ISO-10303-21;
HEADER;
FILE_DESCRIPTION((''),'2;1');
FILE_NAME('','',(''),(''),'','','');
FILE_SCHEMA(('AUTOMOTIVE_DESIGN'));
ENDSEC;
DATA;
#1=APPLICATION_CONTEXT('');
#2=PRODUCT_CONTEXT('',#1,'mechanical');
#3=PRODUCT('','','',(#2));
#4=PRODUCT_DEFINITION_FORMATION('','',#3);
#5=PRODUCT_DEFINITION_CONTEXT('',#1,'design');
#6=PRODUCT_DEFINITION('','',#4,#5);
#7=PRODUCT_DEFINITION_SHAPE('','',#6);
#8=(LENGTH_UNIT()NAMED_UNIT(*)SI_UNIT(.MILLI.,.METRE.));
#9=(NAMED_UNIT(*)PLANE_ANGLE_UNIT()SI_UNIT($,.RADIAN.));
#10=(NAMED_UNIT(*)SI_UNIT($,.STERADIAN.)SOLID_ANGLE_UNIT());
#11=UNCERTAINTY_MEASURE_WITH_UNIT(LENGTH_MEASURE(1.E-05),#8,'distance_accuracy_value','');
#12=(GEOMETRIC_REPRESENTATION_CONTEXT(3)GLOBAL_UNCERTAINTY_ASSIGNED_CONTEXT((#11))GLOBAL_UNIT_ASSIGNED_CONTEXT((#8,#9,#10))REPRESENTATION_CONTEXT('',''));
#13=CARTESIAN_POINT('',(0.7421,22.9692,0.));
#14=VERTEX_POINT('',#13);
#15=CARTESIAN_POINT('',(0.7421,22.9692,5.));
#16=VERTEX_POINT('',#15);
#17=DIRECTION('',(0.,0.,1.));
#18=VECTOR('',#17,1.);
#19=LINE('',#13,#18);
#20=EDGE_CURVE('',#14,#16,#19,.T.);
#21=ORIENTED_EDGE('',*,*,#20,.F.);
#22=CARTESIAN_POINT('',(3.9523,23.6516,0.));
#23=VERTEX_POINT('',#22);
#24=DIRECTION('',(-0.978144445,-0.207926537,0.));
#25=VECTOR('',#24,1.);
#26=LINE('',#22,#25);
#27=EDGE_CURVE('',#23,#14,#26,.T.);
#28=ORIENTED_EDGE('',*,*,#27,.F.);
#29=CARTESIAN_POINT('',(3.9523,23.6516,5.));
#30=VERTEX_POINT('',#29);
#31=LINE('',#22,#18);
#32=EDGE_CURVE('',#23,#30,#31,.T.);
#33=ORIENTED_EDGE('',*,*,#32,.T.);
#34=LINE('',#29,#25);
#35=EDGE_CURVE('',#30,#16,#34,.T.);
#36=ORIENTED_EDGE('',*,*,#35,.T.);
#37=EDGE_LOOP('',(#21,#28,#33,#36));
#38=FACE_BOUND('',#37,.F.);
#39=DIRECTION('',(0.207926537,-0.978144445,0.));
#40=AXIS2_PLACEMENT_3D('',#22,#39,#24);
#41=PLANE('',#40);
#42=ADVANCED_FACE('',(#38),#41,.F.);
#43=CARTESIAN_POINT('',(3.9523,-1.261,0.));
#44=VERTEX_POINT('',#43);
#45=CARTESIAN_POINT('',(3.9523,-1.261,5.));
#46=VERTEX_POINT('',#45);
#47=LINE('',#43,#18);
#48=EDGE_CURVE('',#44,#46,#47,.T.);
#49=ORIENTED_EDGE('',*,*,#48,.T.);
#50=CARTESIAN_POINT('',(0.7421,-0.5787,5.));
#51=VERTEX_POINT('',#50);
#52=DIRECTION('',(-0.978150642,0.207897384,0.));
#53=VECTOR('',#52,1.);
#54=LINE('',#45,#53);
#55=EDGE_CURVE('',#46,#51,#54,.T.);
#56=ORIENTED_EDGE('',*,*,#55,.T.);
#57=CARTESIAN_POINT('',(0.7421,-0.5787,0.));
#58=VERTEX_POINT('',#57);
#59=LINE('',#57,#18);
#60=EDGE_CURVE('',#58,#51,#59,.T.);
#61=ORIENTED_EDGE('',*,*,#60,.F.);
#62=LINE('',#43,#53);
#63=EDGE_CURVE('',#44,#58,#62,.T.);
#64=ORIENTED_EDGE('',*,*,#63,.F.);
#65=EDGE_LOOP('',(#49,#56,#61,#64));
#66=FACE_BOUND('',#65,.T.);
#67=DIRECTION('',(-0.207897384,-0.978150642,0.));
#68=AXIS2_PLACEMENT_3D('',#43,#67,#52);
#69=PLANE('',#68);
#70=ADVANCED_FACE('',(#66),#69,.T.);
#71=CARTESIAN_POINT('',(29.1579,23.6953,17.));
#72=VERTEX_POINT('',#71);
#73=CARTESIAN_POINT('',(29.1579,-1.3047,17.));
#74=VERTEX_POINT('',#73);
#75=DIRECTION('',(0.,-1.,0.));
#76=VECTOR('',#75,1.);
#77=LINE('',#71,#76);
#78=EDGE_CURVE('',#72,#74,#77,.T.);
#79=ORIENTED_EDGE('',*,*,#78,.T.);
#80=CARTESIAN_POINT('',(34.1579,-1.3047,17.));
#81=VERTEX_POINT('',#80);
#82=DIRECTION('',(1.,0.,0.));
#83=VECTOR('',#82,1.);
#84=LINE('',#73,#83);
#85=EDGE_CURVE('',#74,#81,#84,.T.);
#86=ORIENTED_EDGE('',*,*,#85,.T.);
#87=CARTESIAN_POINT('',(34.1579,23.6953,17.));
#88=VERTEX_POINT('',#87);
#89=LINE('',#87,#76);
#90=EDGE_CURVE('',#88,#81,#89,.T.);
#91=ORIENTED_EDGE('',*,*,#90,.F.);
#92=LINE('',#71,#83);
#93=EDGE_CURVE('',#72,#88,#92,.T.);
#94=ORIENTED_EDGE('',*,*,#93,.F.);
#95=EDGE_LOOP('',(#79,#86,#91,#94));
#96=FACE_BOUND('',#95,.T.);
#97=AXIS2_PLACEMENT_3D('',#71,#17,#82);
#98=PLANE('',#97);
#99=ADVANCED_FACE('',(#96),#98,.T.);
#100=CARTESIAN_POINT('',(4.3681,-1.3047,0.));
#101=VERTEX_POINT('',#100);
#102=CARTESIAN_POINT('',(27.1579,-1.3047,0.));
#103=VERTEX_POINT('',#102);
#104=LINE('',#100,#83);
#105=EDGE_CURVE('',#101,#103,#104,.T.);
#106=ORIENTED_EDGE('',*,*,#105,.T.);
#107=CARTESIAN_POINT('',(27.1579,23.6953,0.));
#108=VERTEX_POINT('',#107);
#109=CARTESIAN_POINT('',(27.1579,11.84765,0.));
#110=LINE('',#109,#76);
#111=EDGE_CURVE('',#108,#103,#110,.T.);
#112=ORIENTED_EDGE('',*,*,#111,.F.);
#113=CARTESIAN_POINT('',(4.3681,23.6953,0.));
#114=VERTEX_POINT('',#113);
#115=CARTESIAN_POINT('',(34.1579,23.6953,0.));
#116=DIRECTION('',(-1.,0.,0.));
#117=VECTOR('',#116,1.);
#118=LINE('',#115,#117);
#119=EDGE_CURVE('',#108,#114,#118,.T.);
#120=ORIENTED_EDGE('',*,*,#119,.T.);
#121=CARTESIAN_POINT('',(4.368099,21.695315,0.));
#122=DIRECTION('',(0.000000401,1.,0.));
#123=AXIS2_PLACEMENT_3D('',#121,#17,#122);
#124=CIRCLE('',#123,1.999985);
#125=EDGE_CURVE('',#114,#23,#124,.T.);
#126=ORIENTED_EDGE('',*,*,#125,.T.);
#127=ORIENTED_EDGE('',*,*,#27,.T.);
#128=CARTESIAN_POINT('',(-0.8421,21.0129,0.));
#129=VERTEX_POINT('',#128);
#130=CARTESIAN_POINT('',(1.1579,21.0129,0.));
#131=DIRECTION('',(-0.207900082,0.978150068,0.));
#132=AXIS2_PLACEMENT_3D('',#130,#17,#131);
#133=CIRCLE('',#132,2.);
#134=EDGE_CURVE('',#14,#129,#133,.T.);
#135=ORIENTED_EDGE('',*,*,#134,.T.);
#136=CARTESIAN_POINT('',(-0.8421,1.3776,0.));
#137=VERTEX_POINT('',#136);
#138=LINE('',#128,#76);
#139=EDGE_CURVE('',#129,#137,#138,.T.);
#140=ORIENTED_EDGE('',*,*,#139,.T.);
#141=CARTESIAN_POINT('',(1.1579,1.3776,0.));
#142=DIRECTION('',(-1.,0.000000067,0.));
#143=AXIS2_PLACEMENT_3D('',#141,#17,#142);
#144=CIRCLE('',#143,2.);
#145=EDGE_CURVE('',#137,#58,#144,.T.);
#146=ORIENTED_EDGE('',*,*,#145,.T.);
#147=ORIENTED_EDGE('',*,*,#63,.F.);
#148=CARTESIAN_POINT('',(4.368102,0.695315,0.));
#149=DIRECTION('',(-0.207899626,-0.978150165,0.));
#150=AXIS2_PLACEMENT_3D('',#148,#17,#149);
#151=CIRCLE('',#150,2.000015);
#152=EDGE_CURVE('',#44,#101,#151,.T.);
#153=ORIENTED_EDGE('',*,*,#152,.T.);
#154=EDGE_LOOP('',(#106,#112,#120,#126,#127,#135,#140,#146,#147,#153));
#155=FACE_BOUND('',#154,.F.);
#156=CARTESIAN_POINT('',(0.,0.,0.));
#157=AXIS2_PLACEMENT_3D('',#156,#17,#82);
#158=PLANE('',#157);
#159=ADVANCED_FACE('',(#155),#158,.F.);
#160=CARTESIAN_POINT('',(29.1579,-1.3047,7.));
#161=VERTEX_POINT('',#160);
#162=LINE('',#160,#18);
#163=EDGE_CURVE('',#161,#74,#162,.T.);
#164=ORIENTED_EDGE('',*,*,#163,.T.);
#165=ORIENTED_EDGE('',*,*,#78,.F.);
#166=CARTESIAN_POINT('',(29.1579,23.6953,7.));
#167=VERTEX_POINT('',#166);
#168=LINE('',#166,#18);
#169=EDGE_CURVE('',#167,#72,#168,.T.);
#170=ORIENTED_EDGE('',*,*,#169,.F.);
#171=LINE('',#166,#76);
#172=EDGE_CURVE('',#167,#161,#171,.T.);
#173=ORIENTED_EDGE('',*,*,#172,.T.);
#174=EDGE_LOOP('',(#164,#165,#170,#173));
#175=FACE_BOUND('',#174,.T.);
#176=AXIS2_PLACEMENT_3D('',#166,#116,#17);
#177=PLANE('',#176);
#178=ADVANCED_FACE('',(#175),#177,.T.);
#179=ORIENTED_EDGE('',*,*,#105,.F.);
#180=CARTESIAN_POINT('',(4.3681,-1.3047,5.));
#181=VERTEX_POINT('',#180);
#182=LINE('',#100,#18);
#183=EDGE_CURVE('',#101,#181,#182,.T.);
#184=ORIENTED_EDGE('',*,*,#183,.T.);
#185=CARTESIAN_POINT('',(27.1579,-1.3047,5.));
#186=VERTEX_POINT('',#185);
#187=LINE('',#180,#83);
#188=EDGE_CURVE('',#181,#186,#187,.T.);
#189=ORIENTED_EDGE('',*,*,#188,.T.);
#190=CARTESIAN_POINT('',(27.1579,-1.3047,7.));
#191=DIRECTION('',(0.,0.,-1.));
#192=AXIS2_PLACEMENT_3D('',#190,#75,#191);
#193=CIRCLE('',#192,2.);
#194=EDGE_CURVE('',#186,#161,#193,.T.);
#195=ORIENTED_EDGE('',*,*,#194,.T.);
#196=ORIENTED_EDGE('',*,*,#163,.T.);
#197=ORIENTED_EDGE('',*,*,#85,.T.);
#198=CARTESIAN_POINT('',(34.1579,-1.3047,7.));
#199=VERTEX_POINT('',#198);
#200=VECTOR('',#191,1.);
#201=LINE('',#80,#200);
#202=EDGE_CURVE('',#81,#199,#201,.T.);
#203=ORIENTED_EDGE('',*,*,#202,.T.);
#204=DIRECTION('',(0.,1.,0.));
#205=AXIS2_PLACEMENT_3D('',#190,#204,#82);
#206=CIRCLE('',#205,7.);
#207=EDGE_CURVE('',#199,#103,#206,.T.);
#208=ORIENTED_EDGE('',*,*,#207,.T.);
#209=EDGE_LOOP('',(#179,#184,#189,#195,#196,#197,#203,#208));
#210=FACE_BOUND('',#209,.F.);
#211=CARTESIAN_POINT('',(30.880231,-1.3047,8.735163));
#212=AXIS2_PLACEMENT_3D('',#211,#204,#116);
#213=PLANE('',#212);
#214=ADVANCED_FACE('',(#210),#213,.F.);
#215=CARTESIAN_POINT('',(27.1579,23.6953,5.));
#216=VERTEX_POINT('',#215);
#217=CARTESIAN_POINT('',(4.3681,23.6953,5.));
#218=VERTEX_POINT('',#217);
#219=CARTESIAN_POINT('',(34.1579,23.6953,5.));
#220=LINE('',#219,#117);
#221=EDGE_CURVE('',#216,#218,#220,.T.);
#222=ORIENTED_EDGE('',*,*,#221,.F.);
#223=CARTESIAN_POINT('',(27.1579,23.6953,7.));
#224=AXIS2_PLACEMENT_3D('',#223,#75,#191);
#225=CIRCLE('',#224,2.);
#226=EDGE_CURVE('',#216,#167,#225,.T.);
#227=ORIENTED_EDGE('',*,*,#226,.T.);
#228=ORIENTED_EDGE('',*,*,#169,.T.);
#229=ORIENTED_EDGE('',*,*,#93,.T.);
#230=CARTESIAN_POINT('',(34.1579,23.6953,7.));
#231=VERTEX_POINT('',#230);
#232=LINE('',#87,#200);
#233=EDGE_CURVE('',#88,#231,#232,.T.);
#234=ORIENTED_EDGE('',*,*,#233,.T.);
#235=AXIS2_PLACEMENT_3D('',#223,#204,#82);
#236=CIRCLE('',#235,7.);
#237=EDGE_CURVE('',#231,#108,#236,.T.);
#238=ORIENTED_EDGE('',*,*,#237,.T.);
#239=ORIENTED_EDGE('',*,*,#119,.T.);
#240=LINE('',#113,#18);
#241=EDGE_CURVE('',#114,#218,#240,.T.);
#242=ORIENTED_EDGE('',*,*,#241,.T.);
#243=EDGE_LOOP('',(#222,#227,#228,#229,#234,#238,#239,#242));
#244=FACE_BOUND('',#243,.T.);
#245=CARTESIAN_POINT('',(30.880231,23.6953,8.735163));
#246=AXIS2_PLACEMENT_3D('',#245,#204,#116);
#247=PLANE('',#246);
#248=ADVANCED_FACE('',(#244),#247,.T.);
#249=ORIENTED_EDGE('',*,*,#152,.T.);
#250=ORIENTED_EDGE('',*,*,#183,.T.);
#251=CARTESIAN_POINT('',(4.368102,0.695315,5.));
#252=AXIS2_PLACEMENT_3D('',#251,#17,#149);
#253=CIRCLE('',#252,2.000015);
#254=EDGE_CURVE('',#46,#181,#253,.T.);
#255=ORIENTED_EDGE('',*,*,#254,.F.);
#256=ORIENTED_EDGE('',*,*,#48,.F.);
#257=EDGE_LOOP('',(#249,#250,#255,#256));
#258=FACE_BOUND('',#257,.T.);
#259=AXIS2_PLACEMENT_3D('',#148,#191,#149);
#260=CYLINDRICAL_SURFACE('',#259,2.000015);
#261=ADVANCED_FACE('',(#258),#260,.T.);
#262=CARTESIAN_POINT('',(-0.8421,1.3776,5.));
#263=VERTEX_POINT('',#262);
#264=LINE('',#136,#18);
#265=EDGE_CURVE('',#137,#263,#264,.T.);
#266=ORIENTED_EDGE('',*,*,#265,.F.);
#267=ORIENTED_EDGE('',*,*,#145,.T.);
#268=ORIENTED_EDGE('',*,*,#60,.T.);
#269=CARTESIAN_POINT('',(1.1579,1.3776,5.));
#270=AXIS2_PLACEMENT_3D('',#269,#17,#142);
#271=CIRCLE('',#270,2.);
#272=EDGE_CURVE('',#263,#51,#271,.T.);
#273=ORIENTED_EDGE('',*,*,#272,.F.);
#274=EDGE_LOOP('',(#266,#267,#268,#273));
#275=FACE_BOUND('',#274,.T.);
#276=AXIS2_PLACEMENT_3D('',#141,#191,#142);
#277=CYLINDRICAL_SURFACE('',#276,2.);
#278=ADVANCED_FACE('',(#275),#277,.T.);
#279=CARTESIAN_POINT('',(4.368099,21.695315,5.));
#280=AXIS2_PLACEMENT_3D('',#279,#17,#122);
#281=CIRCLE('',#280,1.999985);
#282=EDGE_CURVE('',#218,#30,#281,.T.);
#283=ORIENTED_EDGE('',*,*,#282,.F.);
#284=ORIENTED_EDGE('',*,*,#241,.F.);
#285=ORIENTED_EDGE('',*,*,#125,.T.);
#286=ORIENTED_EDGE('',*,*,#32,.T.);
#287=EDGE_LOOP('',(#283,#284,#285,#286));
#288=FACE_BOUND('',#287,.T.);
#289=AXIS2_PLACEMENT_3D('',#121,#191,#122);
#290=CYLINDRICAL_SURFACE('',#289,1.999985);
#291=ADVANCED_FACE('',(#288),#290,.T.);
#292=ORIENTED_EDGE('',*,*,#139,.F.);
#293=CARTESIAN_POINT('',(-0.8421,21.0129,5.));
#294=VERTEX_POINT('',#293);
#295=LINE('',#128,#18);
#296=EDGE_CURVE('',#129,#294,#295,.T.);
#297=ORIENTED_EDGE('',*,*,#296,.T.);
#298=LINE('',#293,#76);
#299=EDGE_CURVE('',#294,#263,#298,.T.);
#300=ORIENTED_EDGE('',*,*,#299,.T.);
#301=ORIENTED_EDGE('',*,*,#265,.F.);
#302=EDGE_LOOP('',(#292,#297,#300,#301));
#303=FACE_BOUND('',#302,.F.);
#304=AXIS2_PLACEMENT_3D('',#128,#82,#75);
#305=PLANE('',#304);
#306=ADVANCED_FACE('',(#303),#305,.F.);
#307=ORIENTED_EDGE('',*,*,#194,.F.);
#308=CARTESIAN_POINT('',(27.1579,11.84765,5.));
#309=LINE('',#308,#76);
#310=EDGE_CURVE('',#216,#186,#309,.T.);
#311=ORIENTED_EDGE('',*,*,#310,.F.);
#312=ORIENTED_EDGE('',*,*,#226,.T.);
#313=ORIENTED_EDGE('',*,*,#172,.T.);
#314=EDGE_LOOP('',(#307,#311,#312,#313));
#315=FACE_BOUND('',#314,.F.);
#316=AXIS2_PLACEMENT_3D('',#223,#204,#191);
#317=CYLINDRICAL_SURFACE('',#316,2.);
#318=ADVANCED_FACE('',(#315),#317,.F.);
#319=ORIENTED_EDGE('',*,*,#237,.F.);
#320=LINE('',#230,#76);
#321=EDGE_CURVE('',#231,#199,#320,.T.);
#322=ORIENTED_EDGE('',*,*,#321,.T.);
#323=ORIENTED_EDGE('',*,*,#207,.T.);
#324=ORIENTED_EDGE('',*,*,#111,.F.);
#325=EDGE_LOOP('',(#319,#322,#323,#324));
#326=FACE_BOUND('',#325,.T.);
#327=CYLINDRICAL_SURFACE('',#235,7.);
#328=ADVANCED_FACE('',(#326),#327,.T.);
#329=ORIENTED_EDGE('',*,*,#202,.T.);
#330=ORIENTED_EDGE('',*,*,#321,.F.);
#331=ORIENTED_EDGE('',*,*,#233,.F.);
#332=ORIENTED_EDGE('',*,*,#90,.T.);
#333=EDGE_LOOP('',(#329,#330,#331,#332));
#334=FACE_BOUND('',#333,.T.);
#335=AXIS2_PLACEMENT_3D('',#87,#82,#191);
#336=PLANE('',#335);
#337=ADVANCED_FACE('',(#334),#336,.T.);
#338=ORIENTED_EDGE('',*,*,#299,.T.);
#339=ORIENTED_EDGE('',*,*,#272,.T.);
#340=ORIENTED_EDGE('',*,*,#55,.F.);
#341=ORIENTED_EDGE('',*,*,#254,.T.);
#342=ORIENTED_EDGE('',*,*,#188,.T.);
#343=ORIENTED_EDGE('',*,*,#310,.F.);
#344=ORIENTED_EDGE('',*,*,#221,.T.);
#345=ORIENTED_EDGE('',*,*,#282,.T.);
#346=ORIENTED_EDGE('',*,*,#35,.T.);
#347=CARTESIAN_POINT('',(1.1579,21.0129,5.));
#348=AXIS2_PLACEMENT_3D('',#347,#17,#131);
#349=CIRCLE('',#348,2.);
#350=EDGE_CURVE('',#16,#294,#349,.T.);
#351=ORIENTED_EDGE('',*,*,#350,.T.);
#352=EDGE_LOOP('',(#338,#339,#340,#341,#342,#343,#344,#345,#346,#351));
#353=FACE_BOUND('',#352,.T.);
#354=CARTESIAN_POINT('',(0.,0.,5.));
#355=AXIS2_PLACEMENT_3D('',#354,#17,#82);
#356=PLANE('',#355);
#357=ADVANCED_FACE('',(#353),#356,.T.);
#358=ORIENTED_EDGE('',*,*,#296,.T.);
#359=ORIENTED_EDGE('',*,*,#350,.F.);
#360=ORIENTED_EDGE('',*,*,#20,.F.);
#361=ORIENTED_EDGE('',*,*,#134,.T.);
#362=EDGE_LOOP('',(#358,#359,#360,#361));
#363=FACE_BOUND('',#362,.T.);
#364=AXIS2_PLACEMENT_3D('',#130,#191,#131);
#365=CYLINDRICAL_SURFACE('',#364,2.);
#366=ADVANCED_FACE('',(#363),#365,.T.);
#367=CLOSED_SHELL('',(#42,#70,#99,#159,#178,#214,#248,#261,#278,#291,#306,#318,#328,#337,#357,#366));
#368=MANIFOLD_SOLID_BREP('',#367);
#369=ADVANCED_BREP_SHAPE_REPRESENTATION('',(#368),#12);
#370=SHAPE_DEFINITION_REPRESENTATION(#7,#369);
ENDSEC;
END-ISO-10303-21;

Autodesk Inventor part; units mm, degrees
ref_plane "YZ Plane" through (0, 0, 0) normal (1, 0, 0) x (0, 1, 0)
ref_plane "XZ Plane" through (0, 0, 0) normal (0, 1, 0) x (-1, 0, 0)
ref_plane "XY Plane" through (0, 0, 0) normal (0, 0, 1) x (1, 0, 0)
sketch "Sketch1" plane through (0, 0, 0) normal (0, 0, 1) x (1, 0, 0)
  line L0 (4.3681, -1.3047) -> (34.1579, -1.3047)
  line L1 (34.1579, -1.3047) -> (34.1579, 23.6953)
  line L2 (34.1579, 23.6953) -> (4.3681, 23.6953)
  line L3 (-0.8421, 21.0129) -> (-0.8421, 1.3776)
  line L4 (3.9523, 23.6516) -> (0.7421, 22.9692)
  line L5 (3.9523, -1.261) -> (0.7421, -0.5787)
  line L6 (4.1579, 23.6953) -> (4.1579, -1.3047) construction
  arc A0 (0.7421, 22.9692) -> (-0.8421, 21.0129) centre (1.1579, 21.0129) ccw
  arc A1 (-0.8421, 1.3776) -> (0.7421, -0.5787) centre (1.1579, 1.3776) ccw
  arc A2 (4.3681, 23.6953) -> (3.9523, 23.6516) centre (4.3681, 21.6953) ccw
  arc A3 (3.9523, -1.261) -> (4.3681, -1.3047) centre (4.3681, 0.6953) ccw
  point P0 (0, 0)
  point P1 (-0.8421, 22.6325)
  point P2 (-0.8421, -0.242)
  dimension "d3" = 12
  dimension "d4" = 25
  dimension "d5" = 12
  dimension "d7" = 35
  dimension "d8" = 5
  dimension "d20" = 2
extrude "Plate1" add sketch "Sketch1" along normal blind 5
sketch "Sketch2" plane through (29.1579, 23.6953, 0) normal (1, 0, 0) x (0, 1, 0)
  line L0 (-25, 0) -> (0, 0)
  line L1 (0, 0) -> (0, 17)
  line L2 (0, 17) -> (-25, 17)
  line L3 (-25, 17) -> (-25, 0)
edge flange "Flange1" height 12 angle 90 thickness 5 bend radius 2 thickness toward (1, 0, 0) relief tear relief width 5 relief depth 2.5 edges at (34.1579, 11.1953, 5) wall of the first edge with corners at (29.1579, -1.3047, 0) (29.1579, 23.6953, 0) (29.1579, 23.6953, 17) (29.1579, -1.3047, 17)
bend "Bend1"
corner "Corner1"
ref_plane "midtplan" through (4.3681, 11.1953, 5) normal (0, 1, 0) x (1, 0, 0)
equation "\"d3\" = d5"
equation "\"d9\" = Thickness"
equation "\"d10\" = BendReliefWidth"
equation "\"d11\" = BendReliefDepth"
equation "\"d12\" = MinimumRemnant"
equation "\"d13\" = TransitionRadius"
equation "\"d16\" = BendRadius"
equation "\"d17\" = CornerReliefSize"
equation "\"d18\" = GapSize"
equation "\"d19\" = JacobiRadiusSize"
equation "\"BendReliefWidth\" = Thickness"
equation "\"BendReliefDepth\" = 0.5 * Thickness"
equation "\"TransitionRadius\" = BendRadius"
equation "\"JacobiRadiusSize\" = BendRadius"
equation "\"GapSize\" = Thickness"
equation "\"Thickness\" = 5"
equation "\"MinimumRemnant\" = 10"
equation "\"BendRadius\" = 2"
equation "\"CornerReliefSize\" = 20"
properties part number "hage" material "Steel"
